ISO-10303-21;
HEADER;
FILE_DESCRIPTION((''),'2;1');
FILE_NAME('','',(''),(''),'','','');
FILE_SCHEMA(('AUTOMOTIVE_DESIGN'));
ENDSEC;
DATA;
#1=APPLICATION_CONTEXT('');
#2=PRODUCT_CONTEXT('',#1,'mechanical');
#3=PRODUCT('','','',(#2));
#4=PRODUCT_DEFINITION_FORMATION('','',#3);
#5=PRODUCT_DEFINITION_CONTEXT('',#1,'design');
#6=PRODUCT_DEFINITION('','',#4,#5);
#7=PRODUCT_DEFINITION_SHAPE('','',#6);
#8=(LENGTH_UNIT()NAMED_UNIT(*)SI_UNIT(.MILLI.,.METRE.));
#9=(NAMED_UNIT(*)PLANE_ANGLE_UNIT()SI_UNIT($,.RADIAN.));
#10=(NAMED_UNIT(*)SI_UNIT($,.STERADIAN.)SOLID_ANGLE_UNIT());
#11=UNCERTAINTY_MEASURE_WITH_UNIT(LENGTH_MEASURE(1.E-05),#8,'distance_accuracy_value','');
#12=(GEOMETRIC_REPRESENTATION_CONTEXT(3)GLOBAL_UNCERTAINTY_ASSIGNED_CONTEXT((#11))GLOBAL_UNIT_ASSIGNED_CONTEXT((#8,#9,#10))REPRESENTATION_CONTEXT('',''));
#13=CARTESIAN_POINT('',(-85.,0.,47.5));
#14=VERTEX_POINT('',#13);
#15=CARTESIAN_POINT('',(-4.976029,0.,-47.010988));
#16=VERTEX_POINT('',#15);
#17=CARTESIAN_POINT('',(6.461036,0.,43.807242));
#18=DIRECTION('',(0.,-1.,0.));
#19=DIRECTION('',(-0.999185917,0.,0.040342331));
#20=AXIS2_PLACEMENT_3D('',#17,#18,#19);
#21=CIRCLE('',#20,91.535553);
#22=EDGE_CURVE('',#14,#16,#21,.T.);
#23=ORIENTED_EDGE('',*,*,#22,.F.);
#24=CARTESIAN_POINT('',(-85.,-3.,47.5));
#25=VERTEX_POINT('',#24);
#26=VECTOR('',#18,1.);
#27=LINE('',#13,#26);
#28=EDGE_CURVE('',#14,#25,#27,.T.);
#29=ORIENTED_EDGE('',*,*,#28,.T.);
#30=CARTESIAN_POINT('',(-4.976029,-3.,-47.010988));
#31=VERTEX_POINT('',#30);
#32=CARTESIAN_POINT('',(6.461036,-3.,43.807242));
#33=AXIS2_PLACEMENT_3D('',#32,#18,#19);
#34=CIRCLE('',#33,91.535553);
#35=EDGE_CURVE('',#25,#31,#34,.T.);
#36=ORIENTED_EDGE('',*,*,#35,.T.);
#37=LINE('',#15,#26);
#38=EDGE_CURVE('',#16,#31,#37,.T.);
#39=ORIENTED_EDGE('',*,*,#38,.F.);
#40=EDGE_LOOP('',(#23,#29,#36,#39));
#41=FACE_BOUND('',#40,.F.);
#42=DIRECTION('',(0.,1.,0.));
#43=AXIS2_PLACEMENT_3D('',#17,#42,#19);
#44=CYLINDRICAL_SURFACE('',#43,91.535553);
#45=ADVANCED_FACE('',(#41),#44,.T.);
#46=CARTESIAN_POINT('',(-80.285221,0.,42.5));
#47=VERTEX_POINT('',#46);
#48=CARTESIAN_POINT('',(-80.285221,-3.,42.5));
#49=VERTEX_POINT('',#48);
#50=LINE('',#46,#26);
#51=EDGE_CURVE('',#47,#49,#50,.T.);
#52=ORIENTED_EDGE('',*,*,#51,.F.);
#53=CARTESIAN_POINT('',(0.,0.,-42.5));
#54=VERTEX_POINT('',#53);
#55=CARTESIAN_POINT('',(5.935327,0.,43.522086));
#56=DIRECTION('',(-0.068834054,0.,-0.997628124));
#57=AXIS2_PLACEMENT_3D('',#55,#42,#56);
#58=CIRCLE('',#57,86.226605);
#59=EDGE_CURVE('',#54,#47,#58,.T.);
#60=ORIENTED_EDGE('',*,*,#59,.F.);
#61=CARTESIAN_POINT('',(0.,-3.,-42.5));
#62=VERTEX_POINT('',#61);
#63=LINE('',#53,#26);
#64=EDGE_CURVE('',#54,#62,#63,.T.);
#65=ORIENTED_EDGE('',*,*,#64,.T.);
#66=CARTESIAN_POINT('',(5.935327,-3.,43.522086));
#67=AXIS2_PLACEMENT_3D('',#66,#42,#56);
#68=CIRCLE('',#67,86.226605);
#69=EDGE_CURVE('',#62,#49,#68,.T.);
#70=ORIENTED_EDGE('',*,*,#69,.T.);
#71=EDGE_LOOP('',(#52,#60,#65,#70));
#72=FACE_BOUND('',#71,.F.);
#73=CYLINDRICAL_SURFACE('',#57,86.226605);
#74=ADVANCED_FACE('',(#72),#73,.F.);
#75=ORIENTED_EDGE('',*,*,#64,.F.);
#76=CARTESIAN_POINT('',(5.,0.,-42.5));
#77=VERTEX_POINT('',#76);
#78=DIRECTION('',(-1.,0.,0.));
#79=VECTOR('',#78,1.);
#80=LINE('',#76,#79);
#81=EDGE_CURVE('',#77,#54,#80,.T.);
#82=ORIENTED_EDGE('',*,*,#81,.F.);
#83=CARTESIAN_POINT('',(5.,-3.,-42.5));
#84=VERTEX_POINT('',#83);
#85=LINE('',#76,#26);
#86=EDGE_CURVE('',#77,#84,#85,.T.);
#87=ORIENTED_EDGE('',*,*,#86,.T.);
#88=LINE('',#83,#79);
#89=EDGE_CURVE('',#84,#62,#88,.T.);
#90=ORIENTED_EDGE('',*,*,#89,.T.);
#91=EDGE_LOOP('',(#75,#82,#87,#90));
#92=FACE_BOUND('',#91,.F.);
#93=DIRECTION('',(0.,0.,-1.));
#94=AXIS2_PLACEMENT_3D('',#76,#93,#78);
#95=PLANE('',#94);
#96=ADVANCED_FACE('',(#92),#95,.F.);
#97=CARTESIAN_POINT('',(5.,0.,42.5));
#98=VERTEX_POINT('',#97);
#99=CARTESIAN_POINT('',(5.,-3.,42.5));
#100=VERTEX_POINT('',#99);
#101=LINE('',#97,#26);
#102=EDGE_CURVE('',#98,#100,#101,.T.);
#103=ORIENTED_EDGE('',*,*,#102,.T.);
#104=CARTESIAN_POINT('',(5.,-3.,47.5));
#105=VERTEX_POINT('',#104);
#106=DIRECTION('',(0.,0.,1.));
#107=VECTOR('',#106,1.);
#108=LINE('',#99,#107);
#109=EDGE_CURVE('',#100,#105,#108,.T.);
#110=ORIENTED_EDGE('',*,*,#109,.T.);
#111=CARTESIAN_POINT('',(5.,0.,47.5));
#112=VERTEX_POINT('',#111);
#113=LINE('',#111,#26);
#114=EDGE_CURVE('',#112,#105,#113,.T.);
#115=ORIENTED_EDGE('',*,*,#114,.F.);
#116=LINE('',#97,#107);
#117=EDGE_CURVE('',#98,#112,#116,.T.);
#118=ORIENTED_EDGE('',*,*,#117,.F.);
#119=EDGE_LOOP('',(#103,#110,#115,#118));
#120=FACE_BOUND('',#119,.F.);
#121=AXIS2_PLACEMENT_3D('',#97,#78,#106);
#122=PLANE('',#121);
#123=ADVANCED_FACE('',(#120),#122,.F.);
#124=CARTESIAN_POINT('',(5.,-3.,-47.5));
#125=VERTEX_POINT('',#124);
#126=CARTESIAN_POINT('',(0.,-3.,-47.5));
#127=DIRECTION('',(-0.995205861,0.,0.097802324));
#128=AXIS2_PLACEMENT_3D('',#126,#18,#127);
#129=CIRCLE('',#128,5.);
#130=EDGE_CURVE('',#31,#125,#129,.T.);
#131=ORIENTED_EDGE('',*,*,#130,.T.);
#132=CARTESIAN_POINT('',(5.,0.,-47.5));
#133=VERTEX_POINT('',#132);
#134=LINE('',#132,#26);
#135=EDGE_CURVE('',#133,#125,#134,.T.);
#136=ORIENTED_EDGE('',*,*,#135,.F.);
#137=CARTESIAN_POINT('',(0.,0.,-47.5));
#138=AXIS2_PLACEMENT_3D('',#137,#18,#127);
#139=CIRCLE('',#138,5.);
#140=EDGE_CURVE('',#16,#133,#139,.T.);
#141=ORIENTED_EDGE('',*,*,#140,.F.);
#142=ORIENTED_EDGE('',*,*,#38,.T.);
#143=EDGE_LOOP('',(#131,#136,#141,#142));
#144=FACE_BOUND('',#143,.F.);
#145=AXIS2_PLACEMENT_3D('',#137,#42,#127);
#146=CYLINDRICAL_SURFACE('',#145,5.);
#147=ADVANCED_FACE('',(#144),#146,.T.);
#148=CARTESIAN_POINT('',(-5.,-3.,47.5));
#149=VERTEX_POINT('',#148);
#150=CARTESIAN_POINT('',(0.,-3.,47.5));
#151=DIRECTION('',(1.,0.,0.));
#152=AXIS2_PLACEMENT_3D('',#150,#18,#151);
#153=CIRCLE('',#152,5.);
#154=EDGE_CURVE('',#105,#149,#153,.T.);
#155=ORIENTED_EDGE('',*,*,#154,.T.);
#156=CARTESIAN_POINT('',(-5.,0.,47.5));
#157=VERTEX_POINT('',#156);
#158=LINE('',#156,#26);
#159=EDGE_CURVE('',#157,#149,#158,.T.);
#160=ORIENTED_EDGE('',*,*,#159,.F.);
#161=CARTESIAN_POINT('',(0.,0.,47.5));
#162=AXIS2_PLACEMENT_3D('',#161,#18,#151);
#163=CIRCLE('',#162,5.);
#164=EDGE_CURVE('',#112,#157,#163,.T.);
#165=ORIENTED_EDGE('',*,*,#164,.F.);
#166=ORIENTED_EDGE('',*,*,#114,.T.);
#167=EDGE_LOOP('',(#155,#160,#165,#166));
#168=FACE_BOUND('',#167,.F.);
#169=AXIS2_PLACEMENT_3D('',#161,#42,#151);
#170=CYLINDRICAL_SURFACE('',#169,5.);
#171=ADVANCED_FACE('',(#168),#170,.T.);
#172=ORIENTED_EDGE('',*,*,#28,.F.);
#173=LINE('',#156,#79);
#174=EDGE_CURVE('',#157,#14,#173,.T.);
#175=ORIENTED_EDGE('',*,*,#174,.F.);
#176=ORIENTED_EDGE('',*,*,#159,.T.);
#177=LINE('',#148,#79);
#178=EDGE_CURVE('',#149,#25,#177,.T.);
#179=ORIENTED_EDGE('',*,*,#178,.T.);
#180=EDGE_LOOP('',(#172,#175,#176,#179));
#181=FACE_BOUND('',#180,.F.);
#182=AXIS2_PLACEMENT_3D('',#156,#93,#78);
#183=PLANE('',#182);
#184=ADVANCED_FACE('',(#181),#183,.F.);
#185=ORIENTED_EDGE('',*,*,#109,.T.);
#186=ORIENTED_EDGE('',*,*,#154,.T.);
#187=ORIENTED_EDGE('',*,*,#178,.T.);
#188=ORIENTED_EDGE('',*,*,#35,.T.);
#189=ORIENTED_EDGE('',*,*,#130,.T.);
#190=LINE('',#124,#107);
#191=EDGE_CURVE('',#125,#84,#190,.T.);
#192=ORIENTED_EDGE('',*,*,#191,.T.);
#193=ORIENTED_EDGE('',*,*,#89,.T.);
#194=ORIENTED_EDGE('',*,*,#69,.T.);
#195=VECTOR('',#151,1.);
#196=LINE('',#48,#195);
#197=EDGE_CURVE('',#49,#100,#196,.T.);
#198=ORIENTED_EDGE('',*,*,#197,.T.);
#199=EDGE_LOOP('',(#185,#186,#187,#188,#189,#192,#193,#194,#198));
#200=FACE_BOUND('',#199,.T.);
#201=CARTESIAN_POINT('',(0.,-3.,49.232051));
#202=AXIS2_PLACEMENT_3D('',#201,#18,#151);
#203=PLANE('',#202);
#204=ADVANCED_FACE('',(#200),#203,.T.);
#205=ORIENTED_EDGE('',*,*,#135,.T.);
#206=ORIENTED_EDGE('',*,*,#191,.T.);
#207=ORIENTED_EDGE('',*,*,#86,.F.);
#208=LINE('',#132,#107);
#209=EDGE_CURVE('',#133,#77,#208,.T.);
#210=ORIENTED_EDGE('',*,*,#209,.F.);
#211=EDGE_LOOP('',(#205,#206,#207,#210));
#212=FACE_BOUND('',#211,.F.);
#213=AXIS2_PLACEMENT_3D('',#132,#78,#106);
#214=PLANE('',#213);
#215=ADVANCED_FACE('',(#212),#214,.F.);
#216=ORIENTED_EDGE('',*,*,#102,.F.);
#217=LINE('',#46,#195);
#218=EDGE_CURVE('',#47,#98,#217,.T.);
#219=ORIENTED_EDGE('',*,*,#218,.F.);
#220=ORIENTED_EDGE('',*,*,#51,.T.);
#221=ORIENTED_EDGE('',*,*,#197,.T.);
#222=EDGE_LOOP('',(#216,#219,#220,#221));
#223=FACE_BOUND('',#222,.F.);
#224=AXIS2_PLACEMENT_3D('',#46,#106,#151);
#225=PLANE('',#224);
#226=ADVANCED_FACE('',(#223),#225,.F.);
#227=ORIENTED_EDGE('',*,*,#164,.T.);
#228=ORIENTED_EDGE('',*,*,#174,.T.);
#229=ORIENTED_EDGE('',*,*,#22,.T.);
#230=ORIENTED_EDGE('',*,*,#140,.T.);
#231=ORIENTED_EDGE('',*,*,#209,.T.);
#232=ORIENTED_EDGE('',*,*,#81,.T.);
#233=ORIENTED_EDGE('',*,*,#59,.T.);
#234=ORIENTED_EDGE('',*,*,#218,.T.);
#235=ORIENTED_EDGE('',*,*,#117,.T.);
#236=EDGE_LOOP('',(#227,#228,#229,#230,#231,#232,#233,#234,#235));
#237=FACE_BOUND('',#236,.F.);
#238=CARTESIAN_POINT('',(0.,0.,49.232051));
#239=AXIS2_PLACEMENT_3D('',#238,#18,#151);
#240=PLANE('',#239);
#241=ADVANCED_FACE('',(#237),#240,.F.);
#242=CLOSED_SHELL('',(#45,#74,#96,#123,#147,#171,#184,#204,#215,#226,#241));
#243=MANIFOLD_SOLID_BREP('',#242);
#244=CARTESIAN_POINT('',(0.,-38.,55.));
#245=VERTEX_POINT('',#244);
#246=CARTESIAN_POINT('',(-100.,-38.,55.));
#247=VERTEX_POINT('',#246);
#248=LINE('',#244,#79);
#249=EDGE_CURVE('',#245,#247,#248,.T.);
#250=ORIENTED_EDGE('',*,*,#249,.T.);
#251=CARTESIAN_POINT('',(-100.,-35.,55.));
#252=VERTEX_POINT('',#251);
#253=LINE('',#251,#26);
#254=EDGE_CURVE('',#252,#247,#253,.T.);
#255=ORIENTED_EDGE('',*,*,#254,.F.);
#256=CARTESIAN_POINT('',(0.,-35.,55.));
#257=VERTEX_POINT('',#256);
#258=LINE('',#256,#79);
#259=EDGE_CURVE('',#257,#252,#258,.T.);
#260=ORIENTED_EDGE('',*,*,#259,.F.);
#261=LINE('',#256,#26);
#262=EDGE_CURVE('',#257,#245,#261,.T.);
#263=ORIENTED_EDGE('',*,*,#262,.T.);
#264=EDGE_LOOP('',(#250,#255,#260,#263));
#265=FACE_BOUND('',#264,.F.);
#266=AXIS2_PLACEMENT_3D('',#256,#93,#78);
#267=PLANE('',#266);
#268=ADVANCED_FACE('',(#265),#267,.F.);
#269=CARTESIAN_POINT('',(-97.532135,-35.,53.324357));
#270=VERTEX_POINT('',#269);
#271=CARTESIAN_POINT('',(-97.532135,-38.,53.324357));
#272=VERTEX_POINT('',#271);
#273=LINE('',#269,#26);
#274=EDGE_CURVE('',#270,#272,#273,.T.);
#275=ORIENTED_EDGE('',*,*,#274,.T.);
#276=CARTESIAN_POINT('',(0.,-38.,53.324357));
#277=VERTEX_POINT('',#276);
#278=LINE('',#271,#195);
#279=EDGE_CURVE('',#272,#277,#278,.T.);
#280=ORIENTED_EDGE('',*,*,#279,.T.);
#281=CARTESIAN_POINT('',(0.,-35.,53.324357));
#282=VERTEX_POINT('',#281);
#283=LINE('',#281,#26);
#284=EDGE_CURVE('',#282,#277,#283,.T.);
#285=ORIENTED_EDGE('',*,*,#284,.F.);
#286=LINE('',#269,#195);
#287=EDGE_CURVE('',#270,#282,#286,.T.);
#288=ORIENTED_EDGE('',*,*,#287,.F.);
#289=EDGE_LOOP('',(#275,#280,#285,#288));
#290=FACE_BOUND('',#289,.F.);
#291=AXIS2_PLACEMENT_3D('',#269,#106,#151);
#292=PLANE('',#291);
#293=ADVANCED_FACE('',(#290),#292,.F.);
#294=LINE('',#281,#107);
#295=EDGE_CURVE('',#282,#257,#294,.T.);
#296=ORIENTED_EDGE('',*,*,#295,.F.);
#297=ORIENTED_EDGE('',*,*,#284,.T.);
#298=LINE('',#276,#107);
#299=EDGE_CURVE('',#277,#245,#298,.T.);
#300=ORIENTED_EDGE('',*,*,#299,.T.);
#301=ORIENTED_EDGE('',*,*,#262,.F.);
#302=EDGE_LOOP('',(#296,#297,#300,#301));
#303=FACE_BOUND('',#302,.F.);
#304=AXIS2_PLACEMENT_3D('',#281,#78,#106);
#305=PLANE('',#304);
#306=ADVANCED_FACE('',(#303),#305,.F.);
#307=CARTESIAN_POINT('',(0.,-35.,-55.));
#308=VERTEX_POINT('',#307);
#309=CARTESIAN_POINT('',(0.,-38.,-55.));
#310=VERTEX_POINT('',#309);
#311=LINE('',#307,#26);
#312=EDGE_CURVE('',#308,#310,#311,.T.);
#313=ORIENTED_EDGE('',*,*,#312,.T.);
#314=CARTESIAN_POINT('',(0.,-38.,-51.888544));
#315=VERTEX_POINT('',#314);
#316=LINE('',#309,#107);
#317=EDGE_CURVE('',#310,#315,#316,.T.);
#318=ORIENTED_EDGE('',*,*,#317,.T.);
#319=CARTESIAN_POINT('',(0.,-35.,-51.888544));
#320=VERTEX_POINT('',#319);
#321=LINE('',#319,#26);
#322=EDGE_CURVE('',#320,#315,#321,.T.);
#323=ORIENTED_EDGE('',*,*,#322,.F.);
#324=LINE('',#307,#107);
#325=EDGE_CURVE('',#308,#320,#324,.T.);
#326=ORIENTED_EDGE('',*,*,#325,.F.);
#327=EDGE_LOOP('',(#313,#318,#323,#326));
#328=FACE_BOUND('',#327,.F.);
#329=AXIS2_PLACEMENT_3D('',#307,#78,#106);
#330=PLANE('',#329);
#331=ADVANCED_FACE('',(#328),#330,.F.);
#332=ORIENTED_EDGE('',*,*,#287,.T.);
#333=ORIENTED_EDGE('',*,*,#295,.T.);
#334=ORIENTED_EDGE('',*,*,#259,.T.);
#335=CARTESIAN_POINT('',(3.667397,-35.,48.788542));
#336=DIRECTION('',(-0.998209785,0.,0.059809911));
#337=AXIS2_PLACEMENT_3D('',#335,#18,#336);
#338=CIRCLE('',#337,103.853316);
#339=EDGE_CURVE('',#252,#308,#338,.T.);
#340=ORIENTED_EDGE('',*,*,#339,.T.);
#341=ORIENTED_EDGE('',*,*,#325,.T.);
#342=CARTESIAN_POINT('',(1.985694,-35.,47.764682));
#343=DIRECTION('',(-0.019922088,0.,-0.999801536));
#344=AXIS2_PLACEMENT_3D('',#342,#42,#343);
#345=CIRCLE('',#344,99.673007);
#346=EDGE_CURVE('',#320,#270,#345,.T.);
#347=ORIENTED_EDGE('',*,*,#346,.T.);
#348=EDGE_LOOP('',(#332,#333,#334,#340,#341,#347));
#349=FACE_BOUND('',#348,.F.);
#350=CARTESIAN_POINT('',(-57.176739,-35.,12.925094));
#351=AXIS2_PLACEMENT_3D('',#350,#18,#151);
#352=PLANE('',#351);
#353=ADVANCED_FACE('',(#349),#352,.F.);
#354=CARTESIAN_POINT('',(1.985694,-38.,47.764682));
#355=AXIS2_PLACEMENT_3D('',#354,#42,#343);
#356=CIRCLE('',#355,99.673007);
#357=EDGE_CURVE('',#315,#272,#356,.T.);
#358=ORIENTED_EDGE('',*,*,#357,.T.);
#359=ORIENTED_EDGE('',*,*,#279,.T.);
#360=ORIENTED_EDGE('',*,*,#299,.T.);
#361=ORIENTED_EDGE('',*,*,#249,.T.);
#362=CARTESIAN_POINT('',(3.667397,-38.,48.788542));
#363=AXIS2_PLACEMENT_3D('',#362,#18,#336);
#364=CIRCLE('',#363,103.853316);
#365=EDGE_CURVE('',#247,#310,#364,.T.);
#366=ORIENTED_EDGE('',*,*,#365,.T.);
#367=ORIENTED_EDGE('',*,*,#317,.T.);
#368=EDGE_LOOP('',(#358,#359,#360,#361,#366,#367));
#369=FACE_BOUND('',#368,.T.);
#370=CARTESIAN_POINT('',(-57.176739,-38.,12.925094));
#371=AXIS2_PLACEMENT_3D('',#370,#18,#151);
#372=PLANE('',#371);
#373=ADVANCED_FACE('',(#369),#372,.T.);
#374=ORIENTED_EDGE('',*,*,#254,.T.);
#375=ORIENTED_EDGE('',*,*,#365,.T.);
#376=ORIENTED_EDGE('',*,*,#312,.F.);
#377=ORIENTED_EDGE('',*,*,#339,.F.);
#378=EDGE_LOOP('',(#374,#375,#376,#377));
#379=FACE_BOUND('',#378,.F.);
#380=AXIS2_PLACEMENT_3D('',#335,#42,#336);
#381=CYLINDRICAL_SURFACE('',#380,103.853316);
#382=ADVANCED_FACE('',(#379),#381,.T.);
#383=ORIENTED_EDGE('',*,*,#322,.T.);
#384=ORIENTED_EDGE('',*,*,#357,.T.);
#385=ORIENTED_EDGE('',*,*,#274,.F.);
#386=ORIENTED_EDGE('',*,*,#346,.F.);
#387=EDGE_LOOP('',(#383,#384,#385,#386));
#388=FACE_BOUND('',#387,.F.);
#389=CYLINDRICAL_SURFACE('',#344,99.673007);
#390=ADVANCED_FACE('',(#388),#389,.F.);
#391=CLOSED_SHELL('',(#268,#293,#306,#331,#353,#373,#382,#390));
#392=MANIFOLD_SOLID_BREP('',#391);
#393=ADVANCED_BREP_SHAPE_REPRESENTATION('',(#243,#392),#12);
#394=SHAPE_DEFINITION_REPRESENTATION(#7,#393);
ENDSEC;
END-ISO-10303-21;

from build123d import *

# Parameters (mm, degrees)
F3_DEPTH = 3
F4_DEPTH = 3


# Not quite as in the source:
# - the program builds the solid bodies; features that only make, move or delete a surface that nothing else refers to are left out


with BuildPart() as f3:
    # F2 (on offset) → F3 (new body)
    with BuildSketch(Plane.XZ.offset(35)):
        with BuildLine():
            Line((0, 53.3243566751), (0, 55))
            Line((0, 55), (-100, 55))
            ThreePointArc((-100, 55), (-73.1778339448, -21.0707581316), (0, -55))
            Line((0, -55), (0, -51.8885441124))
            ThreePointArc((0, -51.8885441124), (-71.111364106, -19.9961360664), (-97.532135104, 53.3243566751))
            Line((-97.532135104, 53.3243566751), (0, 53.3243566751))
        make_face()
    extrude(amount=F3_DEPTH)


with BuildPart() as f4:
    # F0 (on Front) → F4 (new body)
    with BuildSketch(Plane.XZ):
        with BuildLine():
            Line((-5, 47.5), (0, 47.5))
            Line((0, 47.5), (5, 47.5))
            ThreePointArc((5, 47.5), (0, 52.5), (-5, 47.5))
        make_face()
        with BuildLine():
            Line((0, 42.5), (0, 47.5))
            Line((0, 47.5), (-5, 47.5))
            ThreePointArc((-5, 47.5), (-3.5355339059, 43.9644660941), (0, 42.5))
        make_face()
        with BuildLine():
            Line((5, 47.5), (0, 47.5))
            Line((0, 47.5), (0, 42.5))
            ThreePointArc((0, 42.5), (3.5355339059, 43.9644660941), (5, 47.5))
        make_face()
        with BuildLine():
            Line((-80.2852206571, 42.5), (0, 42.5))
            ThreePointArc((0, 42.5), (-3.5355339059, 43.9644660941), (-5, 47.5))
            Line((-5, 47.5), (-85, 47.5))
            ThreePointArc((-85, 47.5), (-63.3965803265, -15.3423221911), (-4.9760293042, -47.0109883803))
            ThreePointArc((-4.9760293042, -47.0109883803), (-3.3581945969, -43.7956067907), (0, -42.5))
            ThreePointArc((0, -42.5), (-56.7498093098, -15.6860309965), (-80.2852206571, 42.5))
        make_face()
        with BuildLine():
            ThreePointArc((5, -47.5), (3.5355339059, -43.9644660941), (0, -42.5))
            ThreePointArc((0, -42.5), (-3.3581945969, -43.7956067907), (-4.9760293042, -47.0109883803))
            ThreePointArc((-4.9760293042, -47.0109883803), (-2.4913542209, -47.289476598), (0, -47.5))
            Line((0, -47.5), (5, -47.5))
        make_face()
        with BuildLine():
            ThreePointArc((-4.9760293042, -47.0109883803), (-0.2447993865, -52.4940037305), (5, -47.5))
            Line((5, -47.5), (0, -47.5))
            ThreePointArc((0, -47.5), (-2.4913542209, -47.289476598), (-4.9760293042, -47.0109883803))
        make_face()
        with BuildLine():
            Line((5, -42.5), (0, -42.5))
            ThreePointArc((0, -42.5), (3.5355339059, -43.9644660941), (5, -47.5))
            Line((5, -47.5), (5, -42.5))
        make_face()
        with BuildLine():
            ThreePointArc((5, 47.5), (3.5355339059, 43.9644660941), (0, 42.5))
            Line((0, 42.5), (5, 42.5))
            Line((5, 42.5), (5, 47.5))
        make_face()
    extrude(amount=F4_DEPTH)


solid = Compound([f3.part, f4.part])
